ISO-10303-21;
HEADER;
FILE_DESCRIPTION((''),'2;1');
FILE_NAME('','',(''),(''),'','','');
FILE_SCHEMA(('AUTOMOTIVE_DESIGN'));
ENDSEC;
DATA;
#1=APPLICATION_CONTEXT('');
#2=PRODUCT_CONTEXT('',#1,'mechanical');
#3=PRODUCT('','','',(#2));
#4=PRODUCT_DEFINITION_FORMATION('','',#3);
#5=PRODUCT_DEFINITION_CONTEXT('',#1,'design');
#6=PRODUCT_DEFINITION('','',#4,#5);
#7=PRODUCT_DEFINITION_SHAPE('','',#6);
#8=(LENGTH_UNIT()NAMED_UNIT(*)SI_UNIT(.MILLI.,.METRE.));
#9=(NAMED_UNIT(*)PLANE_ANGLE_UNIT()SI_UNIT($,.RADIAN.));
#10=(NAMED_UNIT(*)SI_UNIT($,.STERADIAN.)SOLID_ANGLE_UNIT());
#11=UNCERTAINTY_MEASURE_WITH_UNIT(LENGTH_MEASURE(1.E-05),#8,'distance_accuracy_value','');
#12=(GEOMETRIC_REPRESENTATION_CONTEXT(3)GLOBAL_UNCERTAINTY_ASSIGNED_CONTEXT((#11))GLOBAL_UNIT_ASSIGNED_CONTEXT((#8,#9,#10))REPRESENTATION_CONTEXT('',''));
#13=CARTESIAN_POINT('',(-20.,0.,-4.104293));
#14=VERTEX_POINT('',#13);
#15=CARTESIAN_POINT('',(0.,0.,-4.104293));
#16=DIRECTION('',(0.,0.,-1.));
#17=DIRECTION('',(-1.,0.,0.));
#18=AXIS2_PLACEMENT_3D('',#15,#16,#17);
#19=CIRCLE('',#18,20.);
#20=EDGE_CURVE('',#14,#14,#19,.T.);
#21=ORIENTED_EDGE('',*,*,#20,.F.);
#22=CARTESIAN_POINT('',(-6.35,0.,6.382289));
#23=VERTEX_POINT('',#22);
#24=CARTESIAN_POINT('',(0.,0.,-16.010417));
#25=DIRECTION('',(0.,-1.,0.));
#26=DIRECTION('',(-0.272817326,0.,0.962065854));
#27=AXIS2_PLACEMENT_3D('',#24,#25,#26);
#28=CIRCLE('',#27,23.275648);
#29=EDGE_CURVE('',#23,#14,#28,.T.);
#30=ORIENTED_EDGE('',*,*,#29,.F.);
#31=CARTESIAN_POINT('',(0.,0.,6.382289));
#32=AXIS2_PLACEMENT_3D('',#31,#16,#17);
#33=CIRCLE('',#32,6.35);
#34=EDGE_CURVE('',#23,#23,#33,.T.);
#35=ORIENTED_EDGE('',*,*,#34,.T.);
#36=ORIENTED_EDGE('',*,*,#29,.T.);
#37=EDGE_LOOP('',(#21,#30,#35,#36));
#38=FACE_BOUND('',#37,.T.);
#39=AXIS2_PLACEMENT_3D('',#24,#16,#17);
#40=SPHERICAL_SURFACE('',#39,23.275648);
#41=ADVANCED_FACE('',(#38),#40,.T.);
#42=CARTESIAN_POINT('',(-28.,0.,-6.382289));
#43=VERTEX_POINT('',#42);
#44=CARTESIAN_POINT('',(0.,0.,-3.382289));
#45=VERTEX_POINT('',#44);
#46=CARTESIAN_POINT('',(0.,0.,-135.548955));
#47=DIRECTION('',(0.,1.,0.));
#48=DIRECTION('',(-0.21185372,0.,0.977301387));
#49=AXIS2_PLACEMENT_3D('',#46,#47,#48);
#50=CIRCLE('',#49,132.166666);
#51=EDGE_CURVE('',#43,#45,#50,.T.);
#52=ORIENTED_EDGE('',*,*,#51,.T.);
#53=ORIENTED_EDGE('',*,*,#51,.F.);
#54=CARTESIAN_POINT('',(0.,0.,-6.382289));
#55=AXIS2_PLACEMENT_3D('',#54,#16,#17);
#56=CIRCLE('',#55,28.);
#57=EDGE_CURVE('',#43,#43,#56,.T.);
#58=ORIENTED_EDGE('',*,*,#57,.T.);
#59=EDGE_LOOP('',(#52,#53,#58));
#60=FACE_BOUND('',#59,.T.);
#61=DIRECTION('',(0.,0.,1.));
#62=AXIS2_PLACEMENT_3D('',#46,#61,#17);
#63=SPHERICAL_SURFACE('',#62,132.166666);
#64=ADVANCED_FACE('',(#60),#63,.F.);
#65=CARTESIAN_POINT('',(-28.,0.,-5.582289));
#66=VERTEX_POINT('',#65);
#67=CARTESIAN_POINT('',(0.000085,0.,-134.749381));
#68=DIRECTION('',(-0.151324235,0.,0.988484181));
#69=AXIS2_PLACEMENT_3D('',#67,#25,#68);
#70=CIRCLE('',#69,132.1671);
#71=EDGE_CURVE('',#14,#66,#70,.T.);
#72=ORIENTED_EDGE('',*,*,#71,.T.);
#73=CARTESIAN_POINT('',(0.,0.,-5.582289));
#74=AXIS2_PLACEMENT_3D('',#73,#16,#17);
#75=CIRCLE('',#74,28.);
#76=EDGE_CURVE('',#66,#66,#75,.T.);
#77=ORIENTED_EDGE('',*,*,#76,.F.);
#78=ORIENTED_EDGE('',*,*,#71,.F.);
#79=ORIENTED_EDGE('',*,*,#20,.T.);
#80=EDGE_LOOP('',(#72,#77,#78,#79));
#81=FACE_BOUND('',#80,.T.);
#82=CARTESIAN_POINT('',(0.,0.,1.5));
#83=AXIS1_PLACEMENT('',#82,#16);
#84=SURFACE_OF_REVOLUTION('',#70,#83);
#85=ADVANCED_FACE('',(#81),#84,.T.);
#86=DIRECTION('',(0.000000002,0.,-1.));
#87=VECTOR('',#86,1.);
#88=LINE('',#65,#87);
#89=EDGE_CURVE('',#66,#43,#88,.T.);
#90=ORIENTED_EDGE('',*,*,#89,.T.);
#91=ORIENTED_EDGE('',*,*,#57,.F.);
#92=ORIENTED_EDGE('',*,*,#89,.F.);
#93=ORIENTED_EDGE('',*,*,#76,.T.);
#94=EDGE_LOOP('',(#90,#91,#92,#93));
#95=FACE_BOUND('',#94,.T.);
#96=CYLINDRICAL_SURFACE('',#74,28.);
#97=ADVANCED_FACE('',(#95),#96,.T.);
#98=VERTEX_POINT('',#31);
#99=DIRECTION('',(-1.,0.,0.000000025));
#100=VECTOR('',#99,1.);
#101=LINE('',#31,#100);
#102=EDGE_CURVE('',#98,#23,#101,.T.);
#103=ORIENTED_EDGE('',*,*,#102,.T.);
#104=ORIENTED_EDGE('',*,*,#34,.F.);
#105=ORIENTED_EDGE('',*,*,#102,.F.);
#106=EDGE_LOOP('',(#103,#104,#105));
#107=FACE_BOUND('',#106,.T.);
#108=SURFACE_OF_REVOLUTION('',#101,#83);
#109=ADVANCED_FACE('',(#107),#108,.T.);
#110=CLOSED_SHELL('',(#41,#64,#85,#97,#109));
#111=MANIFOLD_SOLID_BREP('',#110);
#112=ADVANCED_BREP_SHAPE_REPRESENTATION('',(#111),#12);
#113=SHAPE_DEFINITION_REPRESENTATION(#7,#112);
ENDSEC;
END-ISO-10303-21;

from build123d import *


# Not quite as in the source:
# - ends of sketch curves that miss each other by under 0.0002 mm in the source are joined


with BuildPart() as f1:
    # F0 (on Front) → F1 (revolve)
    with BuildSketch(Plane.XZ):
        with BuildLine():
            ThreePointArc((-6.3500000458, 6.3822891616), (-14.1800115363, 2.4471847578), (-20.0000000206, -4.1042929877))
            ThreePointArc((-20.0000000206, -4.1042929877), (-24.0113747285, -4.7817226312), (-28.0000000016, -5.5822889926))
            Line((-28.0000000016, -5.5822889926), (-28, -6.382289))
            ThreePointArc((-28, -6.382289), (-14.0801278407, -4.1344291551), (0, -3.382289))
            Line((0, -3.382289), (0, 6.382289))
            Line((0, 6.382289), (-6.3500000458, 6.3822891616))
        make_face()
    revolve(axis=Axis((0, 0, 1.5), (0, 0, -1)))


solid = f1.part
